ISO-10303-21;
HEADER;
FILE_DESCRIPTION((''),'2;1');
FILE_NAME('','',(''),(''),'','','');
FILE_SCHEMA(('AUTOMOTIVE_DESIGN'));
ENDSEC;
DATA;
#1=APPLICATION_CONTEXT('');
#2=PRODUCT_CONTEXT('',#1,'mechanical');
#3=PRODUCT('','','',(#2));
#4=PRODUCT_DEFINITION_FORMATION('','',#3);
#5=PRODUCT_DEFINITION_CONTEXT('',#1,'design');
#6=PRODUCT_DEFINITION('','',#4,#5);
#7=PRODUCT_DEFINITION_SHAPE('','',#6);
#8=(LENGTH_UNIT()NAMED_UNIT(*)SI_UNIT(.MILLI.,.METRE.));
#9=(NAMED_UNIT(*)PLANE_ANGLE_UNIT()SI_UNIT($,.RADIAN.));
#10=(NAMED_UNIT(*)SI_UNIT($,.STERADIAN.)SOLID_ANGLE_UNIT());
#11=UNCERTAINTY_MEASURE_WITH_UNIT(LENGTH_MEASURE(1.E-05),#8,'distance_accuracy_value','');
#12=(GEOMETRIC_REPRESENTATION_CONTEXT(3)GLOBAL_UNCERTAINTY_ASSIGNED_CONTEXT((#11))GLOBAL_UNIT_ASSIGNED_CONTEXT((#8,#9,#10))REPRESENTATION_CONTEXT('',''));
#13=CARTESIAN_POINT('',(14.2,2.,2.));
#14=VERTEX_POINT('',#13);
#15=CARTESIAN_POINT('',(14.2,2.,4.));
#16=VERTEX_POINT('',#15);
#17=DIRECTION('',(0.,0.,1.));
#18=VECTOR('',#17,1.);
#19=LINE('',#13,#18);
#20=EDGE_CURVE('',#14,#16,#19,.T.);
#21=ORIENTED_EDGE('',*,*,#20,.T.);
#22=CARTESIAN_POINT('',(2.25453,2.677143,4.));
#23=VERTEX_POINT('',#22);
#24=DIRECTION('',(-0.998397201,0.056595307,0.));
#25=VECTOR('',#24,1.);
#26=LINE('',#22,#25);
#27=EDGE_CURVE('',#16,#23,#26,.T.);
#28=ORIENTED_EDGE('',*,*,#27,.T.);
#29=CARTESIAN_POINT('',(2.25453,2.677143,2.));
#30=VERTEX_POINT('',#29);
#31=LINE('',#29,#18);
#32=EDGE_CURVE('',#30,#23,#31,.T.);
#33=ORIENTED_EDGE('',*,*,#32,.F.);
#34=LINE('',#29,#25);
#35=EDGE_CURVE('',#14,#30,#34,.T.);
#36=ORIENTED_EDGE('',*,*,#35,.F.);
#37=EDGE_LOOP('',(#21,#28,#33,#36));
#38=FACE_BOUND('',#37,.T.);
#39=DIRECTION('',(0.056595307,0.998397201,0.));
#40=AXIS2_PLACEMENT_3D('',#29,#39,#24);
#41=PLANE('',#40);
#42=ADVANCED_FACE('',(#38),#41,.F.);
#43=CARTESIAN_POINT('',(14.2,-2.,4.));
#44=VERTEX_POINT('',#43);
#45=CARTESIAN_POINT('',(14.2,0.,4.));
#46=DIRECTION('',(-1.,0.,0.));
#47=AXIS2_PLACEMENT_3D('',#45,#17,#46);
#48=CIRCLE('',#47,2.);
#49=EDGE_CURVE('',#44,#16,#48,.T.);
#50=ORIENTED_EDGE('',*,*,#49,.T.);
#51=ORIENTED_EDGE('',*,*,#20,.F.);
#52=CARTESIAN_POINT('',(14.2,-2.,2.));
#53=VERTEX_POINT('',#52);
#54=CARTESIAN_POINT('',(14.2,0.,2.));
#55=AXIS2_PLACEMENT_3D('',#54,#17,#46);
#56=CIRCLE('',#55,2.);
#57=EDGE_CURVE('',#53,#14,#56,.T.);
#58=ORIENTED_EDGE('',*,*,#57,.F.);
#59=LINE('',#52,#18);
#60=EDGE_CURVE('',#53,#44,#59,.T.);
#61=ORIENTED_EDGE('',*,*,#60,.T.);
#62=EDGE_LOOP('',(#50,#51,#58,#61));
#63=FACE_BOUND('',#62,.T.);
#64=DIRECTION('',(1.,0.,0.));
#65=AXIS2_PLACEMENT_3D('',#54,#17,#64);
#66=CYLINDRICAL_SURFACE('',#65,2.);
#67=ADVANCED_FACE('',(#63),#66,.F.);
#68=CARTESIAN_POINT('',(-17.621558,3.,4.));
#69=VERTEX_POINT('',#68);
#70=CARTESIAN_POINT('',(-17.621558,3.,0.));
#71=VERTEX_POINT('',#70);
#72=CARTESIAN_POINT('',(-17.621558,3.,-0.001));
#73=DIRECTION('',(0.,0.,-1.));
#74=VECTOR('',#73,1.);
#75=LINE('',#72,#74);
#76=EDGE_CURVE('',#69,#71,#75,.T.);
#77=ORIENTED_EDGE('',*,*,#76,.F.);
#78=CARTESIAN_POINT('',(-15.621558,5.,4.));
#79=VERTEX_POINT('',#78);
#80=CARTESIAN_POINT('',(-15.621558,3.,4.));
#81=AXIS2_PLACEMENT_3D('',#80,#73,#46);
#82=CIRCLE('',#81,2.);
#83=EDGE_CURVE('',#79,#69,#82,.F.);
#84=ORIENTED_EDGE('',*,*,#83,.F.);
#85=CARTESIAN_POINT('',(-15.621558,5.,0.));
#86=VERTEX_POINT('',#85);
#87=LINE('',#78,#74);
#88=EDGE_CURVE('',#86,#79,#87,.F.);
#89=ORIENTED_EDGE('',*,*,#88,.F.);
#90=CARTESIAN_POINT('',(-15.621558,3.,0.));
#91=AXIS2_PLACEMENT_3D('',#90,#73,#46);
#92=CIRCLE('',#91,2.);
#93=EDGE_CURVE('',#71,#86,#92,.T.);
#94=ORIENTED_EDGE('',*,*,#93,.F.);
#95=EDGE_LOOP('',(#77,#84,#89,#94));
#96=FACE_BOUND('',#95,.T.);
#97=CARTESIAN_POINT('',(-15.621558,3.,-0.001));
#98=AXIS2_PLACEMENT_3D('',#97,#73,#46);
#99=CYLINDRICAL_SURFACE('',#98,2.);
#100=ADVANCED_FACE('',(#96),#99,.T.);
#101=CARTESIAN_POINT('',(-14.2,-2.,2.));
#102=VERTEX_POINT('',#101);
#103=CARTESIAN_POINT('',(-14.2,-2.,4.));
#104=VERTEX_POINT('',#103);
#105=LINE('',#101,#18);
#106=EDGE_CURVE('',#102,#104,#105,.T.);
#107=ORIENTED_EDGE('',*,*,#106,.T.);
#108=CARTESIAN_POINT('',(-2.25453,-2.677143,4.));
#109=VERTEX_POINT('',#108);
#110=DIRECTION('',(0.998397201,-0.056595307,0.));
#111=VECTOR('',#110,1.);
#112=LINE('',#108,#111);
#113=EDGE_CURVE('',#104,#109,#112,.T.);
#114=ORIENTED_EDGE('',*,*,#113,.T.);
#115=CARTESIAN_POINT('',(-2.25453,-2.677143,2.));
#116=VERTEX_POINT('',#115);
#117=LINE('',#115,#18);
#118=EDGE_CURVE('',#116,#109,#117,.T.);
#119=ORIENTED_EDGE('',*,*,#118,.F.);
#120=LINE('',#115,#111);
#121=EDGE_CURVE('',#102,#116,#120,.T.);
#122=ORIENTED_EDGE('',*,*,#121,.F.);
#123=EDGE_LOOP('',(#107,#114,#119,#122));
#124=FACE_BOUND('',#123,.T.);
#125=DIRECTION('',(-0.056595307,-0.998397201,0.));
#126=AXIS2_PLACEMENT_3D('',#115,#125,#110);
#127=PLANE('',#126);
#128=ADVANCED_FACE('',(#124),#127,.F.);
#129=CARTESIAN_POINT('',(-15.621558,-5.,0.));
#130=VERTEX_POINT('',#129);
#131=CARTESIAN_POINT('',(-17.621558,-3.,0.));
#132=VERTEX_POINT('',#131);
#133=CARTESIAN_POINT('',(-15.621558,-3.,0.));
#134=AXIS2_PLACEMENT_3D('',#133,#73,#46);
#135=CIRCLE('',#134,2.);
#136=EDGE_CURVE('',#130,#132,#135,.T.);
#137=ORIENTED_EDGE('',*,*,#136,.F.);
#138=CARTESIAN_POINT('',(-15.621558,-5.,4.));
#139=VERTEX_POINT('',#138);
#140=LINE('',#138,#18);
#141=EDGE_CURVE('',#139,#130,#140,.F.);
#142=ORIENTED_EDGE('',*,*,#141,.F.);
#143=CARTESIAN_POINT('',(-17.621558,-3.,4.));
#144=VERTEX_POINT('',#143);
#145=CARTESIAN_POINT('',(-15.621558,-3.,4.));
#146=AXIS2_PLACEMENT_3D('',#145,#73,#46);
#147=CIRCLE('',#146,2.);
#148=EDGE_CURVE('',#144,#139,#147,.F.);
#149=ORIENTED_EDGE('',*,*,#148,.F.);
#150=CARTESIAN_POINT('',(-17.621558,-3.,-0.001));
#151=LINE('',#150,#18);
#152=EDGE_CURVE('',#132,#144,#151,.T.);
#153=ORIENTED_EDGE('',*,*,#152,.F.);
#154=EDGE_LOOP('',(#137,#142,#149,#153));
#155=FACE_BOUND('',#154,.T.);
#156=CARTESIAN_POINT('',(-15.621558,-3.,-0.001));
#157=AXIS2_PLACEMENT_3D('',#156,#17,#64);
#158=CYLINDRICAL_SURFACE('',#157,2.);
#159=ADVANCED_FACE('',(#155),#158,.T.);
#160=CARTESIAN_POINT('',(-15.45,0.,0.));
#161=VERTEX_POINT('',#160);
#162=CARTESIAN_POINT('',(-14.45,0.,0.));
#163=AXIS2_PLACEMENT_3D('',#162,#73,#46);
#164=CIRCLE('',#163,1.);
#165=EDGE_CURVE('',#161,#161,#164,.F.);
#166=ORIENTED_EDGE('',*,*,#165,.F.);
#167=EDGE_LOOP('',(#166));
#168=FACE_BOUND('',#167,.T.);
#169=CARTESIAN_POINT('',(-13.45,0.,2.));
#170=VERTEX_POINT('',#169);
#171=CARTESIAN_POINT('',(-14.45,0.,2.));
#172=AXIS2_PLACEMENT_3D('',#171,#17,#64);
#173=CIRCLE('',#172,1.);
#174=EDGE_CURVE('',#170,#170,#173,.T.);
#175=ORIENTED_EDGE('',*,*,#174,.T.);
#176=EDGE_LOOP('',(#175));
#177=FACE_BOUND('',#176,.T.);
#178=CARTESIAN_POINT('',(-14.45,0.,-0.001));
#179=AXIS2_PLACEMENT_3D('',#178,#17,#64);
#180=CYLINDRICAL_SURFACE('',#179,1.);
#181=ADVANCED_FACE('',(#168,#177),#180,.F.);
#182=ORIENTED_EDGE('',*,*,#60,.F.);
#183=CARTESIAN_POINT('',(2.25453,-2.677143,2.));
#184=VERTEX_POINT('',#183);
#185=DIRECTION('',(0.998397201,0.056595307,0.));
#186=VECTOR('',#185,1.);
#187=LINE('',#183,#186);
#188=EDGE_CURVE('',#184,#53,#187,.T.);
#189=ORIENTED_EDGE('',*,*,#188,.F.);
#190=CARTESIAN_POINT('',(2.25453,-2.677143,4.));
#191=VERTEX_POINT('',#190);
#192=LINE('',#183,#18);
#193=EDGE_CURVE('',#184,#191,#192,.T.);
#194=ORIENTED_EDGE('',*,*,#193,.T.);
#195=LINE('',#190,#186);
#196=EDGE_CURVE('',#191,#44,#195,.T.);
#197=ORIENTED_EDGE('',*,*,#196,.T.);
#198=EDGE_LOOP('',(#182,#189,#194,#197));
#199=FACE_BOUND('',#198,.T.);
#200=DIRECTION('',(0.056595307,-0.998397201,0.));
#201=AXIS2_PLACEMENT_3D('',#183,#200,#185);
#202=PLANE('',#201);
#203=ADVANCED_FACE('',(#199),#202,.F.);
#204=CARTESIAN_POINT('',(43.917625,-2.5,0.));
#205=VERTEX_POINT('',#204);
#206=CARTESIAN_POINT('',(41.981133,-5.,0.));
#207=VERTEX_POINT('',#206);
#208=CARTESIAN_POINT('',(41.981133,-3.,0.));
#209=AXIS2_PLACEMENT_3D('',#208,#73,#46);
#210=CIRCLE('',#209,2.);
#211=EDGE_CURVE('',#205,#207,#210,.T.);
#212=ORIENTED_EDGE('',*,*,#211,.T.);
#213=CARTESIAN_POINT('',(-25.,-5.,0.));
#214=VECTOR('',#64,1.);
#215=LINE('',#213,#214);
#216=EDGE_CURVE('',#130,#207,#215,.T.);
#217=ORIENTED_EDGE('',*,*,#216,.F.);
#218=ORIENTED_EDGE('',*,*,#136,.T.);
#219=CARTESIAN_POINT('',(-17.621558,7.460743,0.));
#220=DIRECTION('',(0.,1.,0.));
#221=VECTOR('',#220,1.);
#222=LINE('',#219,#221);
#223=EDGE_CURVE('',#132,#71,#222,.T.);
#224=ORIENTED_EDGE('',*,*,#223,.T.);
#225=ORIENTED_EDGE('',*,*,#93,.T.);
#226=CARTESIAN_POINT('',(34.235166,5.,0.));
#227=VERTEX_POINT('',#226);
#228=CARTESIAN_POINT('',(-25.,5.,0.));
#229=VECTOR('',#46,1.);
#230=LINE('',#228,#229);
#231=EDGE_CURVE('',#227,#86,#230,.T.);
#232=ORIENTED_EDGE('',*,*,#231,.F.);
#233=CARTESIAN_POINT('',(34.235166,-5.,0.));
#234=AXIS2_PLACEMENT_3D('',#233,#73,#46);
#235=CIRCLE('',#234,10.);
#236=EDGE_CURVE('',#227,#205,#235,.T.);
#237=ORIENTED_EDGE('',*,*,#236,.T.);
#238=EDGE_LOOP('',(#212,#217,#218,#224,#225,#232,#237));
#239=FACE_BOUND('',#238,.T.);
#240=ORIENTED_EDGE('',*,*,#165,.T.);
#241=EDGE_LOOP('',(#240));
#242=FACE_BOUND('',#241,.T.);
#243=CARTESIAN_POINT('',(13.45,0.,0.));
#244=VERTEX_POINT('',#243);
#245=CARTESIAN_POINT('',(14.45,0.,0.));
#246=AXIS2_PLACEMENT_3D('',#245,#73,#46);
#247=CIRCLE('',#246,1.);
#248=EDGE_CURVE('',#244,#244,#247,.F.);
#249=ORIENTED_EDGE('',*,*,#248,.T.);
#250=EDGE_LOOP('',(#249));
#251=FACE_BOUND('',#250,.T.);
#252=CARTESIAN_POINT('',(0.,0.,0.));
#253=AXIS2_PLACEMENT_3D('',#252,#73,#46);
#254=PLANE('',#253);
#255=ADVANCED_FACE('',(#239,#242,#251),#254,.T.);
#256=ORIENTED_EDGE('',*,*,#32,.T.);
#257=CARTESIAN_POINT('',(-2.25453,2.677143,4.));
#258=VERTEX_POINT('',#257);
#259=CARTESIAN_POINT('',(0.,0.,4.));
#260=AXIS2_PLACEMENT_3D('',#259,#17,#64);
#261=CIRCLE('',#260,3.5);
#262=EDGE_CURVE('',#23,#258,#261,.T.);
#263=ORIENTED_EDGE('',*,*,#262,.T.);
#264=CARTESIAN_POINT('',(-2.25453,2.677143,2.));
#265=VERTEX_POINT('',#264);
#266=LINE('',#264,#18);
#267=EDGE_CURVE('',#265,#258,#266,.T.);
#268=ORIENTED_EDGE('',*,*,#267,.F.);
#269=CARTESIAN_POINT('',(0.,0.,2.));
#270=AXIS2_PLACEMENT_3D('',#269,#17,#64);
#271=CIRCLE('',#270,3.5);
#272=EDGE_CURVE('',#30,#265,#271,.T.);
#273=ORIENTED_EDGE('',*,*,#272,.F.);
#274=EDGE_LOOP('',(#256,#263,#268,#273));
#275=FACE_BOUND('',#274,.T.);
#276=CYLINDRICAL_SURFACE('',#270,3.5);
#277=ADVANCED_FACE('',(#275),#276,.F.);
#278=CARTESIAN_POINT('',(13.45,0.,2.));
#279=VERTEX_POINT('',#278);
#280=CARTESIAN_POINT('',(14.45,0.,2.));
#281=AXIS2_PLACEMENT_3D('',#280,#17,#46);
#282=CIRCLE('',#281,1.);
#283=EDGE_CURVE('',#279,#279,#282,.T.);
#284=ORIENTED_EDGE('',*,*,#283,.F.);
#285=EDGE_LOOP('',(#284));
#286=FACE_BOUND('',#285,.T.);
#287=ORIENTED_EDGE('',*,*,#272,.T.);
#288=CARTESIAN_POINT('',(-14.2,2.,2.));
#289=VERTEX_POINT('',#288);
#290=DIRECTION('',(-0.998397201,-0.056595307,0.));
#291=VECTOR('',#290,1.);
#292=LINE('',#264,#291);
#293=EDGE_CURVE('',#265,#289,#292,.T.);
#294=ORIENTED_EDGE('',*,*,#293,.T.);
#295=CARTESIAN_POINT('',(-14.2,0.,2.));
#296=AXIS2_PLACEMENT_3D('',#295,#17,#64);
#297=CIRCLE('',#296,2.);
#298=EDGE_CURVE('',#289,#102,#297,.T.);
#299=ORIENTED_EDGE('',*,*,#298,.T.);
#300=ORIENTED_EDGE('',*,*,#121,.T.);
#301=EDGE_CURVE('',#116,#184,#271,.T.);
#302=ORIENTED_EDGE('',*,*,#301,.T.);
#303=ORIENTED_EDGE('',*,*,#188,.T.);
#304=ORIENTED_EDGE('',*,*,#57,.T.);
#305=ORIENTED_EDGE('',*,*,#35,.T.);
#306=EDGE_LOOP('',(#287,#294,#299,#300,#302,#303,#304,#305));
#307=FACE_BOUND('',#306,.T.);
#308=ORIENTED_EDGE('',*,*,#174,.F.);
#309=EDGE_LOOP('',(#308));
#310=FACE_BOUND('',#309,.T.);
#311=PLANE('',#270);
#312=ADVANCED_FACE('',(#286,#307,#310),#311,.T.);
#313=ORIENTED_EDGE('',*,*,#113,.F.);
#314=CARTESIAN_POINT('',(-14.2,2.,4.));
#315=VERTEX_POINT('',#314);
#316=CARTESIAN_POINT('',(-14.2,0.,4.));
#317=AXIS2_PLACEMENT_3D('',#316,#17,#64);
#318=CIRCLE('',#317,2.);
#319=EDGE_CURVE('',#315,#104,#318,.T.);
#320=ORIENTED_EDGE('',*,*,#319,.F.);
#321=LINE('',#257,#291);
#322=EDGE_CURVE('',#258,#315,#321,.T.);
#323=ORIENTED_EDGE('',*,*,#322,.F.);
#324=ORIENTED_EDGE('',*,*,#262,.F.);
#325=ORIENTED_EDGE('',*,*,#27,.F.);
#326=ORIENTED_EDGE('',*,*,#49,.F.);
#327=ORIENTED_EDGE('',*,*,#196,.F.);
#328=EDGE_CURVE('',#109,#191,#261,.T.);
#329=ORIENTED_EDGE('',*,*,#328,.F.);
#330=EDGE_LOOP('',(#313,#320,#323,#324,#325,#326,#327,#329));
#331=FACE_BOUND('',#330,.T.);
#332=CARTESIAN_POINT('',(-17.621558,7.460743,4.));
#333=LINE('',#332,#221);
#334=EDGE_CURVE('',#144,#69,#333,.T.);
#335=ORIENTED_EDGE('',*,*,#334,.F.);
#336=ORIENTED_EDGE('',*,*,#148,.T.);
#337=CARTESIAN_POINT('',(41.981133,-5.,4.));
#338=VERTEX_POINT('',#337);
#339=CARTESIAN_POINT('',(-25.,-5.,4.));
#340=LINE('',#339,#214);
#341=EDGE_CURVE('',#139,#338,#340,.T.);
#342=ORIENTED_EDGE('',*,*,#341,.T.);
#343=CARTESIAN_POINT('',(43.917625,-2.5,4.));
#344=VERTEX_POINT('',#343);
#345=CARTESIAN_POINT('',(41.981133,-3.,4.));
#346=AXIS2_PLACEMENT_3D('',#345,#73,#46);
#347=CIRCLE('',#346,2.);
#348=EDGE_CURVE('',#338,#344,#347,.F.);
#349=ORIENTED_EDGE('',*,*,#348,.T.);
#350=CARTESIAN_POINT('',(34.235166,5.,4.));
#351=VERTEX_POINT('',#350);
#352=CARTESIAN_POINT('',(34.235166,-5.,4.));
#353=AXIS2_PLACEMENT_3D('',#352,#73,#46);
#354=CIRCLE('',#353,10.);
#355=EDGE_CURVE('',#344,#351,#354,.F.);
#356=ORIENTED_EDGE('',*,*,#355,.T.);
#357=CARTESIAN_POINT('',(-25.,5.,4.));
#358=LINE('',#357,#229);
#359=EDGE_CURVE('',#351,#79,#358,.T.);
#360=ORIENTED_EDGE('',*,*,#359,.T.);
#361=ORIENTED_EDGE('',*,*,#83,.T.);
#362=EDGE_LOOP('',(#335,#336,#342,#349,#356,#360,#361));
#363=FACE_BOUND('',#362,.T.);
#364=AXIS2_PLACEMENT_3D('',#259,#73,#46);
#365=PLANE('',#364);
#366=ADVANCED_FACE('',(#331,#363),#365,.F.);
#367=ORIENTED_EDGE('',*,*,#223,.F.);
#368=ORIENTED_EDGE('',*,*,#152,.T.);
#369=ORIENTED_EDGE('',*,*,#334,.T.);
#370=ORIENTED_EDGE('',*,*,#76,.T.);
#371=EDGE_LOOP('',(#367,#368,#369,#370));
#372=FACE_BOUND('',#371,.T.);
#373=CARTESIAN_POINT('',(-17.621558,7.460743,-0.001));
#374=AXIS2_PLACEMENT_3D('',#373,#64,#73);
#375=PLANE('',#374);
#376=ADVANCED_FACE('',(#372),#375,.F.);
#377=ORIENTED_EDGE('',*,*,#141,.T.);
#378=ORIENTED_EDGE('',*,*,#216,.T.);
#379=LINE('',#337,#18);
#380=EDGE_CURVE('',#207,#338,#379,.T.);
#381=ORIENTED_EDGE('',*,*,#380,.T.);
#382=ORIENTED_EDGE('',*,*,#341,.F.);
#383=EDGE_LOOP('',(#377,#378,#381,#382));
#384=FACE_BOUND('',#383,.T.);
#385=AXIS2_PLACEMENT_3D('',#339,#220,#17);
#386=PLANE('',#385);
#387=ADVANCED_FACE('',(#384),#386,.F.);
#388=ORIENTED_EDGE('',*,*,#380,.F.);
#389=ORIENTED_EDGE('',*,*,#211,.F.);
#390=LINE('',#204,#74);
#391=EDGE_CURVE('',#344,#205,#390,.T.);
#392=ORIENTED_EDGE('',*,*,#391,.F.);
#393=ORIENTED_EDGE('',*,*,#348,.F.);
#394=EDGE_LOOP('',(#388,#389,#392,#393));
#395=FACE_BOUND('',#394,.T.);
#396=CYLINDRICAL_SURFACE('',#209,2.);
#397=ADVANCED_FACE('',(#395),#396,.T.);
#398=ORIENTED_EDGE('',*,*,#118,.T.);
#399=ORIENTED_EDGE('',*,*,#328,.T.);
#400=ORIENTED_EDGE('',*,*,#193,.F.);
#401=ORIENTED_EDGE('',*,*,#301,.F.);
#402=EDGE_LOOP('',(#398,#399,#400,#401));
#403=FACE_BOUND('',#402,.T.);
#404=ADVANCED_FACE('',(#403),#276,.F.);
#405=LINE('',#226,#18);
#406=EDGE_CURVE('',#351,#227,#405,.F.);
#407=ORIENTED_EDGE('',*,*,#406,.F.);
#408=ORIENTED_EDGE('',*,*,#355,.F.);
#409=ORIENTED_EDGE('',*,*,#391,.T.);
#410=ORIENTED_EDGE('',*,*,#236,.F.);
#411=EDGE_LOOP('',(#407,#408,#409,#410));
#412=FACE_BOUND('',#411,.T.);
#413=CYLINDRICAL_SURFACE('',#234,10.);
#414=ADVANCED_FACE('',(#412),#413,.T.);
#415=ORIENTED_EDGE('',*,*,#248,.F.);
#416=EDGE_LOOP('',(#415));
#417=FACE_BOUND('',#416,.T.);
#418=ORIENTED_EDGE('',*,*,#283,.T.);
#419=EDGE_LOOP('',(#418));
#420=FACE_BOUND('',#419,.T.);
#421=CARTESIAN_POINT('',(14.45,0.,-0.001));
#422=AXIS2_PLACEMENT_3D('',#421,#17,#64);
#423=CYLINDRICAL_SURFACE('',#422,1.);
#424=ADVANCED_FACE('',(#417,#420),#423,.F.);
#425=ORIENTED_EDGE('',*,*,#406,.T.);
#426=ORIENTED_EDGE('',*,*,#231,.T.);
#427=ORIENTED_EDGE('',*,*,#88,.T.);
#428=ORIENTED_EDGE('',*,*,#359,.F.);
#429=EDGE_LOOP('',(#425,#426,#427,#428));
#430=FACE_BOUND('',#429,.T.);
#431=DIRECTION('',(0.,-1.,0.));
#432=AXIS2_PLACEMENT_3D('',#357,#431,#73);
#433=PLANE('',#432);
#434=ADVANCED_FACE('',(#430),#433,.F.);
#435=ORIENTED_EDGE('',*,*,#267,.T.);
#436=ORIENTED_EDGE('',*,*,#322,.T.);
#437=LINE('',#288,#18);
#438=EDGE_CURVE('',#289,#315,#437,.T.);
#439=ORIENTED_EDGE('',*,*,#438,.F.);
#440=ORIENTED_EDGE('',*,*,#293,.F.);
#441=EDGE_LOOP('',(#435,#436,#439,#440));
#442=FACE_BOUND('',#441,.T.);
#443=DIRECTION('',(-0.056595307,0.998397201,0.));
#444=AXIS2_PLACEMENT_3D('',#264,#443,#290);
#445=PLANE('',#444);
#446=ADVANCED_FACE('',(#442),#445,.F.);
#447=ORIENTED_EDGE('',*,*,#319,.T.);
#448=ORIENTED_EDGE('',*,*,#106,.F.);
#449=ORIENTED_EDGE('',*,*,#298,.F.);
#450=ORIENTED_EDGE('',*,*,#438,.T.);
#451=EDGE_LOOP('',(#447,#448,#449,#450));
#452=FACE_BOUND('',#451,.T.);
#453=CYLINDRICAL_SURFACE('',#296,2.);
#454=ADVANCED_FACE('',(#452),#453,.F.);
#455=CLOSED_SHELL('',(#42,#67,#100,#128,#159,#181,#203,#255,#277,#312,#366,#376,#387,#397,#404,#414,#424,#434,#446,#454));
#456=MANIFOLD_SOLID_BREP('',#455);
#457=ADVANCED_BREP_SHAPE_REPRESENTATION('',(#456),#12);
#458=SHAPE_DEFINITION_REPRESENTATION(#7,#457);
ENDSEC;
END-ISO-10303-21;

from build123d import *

# Parameters (mm, degrees)
SKETCH1_W           = 50
SKETCH1_H           = 10
BOSS_EXTRUDE1_DEPTH = 4
CUT_EXTRUDE1_DEPTH  = 2
CUT_EXTRUDE2_REACH  = 27.573
SKETCH3_R           = 1
CUT_EXTRUDE3_REACH  = 27.807
SKETCH4_W           = 8.712551382
SKETCH4_H           = 15.185608923
SKETCH5_W           = 19.235166375
SKETCH5_H           = 10
BOSS_EXTRUDE2_DEPTH = 4
FILLET1_R           = 10
FILLET2_R           = 2
FILLET3_R           = 2
FILLET4_R           = 2


with BuildPart() as part:
    # Sketch1 → Boss-Extrude1 (new body)
    with BuildSketch(Plane.XY):
        Rectangle(SKETCH1_W, SKETCH1_H)
    extrude(amount=BOSS_EXTRUDE1_DEPTH)

    # Sketch2 → Cut-Extrude1 (cut)
    with BuildSketch(Plane.XY.offset(4)):
        with BuildLine():
            Line((-2.254530133, 2.677142857), (-14.2, 2))
            ThreePointArc((-14.2, 2), (-16.2, 0), (-14.2, -2))
            Line((-14.2, -2), (-2.254530133, -2.677142857))
            ThreePointArc((-2.254530133, -2.677142857), (0, -3.5), (2.254530133, -2.677142857))
            Line((2.254530133, -2.677142857), (14.2, -2))
            ThreePointArc((14.2, -2), (16.2, 0), (14.2, 2))
            Line((14.2, 2), (2.254530133, 2.677142857))
            ThreePointArc((2.254530133, 2.677142857), (0, 3.5), (-2.254530133, 2.677142857))
        make_face()
    extrude(amount=-CUT_EXTRUDE1_DEPTH, mode=Mode.SUBTRACT)

    # Sketch3 → Cut-Extrude2 (cut, up to next)
    with BuildSketch(Plane.XY.offset(2), mode=Mode.PRIVATE) as cut_extrude2_sk1:
        with Locations((-14.45, 0)):
            Circle(SKETCH3_R)
    cut_extrude2_tool1 = extrude(cut_extrude2_sk1.sketch, amount=-CUT_EXTRUDE2_REACH, mode=Mode.PRIVATE) & part.part
    # Sketch3 → Cut-Extrude2 (cut, up to next)
    with BuildSketch(Plane.XY.offset(2), mode=Mode.PRIVATE) as cut_extrude2_sk2:
        with Locations(Location((14.45, 0, 0), (0, 0, 180))):
            Circle(SKETCH3_R)
    cut_extrude2_tool2 = extrude(cut_extrude2_sk2.sketch, amount=-CUT_EXTRUDE2_REACH, mode=Mode.PRIVATE) & part.part
    add(cut_extrude2_tool1.solids().sort_by_distance((-14.45, 0, 2))[0], mode=Mode.SUBTRACT)
    add(cut_extrude2_tool2.solids().sort_by_distance((14.45, 0, 2))[0], mode=Mode.SUBTRACT)

    # Sketch4 → Cut-Extrude3 (cut, up to next)
    with BuildSketch(Plane.XY.offset(4), mode=Mode.PRIVATE) as cut_extrude3_sk1:
        with Locations((-21.977833235, -0.132061848)):
            Rectangle(SKETCH4_W, SKETCH4_H)
    cut_extrude3_tool1 = extrude(cut_extrude3_sk1.sketch, amount=-CUT_EXTRUDE3_REACH, mode=Mode.PRIVATE) & part.part
    add(cut_extrude3_tool1.solids().sort_by_distance((-21.977833, -0.132062, 4))[0], mode=Mode.SUBTRACT)

    # Sketch5 → Boss-Extrude2 (add)
    with BuildSketch(Plane.XY.offset(4)):
        with Locations((34.617583188, 0)):
            Rectangle(SKETCH5_W, SKETCH5_H)
    extrude(amount=-BOSS_EXTRUDE2_DEPTH)

    # Fillet1
    fillet1_edges = [part.edges().sort_by_distance(p)[0] for p in [
        (44.235166375, 5, 2),
    ]]
    fillet(fillet1_edges, radius=FILLET1_R - 0.0001)  # a hair under: the kernel refuses the full size

    # Fillet2
    fillet2_edges = [part.edges().sort_by_distance(p)[0] for p in [
        (44.235166375, -5, 2),
    ]]
    fillet(fillet2_edges, radius=FILLET2_R)

    # Fillet3
    fillet3_edges = [part.edges().sort_by_distance(p)[0] for p in [
        (-17.621557544, 5, 2),
    ]]
    fillet(fillet3_edges, radius=FILLET3_R)

    # Fillet4
    fillet4_edges = [part.edges().sort_by_distance(p)[0] for p in [
        (-17.621557544, -5, 2),
    ]]
    fillet(fillet4_edges, radius=FILLET4_R)


solid = part.part
